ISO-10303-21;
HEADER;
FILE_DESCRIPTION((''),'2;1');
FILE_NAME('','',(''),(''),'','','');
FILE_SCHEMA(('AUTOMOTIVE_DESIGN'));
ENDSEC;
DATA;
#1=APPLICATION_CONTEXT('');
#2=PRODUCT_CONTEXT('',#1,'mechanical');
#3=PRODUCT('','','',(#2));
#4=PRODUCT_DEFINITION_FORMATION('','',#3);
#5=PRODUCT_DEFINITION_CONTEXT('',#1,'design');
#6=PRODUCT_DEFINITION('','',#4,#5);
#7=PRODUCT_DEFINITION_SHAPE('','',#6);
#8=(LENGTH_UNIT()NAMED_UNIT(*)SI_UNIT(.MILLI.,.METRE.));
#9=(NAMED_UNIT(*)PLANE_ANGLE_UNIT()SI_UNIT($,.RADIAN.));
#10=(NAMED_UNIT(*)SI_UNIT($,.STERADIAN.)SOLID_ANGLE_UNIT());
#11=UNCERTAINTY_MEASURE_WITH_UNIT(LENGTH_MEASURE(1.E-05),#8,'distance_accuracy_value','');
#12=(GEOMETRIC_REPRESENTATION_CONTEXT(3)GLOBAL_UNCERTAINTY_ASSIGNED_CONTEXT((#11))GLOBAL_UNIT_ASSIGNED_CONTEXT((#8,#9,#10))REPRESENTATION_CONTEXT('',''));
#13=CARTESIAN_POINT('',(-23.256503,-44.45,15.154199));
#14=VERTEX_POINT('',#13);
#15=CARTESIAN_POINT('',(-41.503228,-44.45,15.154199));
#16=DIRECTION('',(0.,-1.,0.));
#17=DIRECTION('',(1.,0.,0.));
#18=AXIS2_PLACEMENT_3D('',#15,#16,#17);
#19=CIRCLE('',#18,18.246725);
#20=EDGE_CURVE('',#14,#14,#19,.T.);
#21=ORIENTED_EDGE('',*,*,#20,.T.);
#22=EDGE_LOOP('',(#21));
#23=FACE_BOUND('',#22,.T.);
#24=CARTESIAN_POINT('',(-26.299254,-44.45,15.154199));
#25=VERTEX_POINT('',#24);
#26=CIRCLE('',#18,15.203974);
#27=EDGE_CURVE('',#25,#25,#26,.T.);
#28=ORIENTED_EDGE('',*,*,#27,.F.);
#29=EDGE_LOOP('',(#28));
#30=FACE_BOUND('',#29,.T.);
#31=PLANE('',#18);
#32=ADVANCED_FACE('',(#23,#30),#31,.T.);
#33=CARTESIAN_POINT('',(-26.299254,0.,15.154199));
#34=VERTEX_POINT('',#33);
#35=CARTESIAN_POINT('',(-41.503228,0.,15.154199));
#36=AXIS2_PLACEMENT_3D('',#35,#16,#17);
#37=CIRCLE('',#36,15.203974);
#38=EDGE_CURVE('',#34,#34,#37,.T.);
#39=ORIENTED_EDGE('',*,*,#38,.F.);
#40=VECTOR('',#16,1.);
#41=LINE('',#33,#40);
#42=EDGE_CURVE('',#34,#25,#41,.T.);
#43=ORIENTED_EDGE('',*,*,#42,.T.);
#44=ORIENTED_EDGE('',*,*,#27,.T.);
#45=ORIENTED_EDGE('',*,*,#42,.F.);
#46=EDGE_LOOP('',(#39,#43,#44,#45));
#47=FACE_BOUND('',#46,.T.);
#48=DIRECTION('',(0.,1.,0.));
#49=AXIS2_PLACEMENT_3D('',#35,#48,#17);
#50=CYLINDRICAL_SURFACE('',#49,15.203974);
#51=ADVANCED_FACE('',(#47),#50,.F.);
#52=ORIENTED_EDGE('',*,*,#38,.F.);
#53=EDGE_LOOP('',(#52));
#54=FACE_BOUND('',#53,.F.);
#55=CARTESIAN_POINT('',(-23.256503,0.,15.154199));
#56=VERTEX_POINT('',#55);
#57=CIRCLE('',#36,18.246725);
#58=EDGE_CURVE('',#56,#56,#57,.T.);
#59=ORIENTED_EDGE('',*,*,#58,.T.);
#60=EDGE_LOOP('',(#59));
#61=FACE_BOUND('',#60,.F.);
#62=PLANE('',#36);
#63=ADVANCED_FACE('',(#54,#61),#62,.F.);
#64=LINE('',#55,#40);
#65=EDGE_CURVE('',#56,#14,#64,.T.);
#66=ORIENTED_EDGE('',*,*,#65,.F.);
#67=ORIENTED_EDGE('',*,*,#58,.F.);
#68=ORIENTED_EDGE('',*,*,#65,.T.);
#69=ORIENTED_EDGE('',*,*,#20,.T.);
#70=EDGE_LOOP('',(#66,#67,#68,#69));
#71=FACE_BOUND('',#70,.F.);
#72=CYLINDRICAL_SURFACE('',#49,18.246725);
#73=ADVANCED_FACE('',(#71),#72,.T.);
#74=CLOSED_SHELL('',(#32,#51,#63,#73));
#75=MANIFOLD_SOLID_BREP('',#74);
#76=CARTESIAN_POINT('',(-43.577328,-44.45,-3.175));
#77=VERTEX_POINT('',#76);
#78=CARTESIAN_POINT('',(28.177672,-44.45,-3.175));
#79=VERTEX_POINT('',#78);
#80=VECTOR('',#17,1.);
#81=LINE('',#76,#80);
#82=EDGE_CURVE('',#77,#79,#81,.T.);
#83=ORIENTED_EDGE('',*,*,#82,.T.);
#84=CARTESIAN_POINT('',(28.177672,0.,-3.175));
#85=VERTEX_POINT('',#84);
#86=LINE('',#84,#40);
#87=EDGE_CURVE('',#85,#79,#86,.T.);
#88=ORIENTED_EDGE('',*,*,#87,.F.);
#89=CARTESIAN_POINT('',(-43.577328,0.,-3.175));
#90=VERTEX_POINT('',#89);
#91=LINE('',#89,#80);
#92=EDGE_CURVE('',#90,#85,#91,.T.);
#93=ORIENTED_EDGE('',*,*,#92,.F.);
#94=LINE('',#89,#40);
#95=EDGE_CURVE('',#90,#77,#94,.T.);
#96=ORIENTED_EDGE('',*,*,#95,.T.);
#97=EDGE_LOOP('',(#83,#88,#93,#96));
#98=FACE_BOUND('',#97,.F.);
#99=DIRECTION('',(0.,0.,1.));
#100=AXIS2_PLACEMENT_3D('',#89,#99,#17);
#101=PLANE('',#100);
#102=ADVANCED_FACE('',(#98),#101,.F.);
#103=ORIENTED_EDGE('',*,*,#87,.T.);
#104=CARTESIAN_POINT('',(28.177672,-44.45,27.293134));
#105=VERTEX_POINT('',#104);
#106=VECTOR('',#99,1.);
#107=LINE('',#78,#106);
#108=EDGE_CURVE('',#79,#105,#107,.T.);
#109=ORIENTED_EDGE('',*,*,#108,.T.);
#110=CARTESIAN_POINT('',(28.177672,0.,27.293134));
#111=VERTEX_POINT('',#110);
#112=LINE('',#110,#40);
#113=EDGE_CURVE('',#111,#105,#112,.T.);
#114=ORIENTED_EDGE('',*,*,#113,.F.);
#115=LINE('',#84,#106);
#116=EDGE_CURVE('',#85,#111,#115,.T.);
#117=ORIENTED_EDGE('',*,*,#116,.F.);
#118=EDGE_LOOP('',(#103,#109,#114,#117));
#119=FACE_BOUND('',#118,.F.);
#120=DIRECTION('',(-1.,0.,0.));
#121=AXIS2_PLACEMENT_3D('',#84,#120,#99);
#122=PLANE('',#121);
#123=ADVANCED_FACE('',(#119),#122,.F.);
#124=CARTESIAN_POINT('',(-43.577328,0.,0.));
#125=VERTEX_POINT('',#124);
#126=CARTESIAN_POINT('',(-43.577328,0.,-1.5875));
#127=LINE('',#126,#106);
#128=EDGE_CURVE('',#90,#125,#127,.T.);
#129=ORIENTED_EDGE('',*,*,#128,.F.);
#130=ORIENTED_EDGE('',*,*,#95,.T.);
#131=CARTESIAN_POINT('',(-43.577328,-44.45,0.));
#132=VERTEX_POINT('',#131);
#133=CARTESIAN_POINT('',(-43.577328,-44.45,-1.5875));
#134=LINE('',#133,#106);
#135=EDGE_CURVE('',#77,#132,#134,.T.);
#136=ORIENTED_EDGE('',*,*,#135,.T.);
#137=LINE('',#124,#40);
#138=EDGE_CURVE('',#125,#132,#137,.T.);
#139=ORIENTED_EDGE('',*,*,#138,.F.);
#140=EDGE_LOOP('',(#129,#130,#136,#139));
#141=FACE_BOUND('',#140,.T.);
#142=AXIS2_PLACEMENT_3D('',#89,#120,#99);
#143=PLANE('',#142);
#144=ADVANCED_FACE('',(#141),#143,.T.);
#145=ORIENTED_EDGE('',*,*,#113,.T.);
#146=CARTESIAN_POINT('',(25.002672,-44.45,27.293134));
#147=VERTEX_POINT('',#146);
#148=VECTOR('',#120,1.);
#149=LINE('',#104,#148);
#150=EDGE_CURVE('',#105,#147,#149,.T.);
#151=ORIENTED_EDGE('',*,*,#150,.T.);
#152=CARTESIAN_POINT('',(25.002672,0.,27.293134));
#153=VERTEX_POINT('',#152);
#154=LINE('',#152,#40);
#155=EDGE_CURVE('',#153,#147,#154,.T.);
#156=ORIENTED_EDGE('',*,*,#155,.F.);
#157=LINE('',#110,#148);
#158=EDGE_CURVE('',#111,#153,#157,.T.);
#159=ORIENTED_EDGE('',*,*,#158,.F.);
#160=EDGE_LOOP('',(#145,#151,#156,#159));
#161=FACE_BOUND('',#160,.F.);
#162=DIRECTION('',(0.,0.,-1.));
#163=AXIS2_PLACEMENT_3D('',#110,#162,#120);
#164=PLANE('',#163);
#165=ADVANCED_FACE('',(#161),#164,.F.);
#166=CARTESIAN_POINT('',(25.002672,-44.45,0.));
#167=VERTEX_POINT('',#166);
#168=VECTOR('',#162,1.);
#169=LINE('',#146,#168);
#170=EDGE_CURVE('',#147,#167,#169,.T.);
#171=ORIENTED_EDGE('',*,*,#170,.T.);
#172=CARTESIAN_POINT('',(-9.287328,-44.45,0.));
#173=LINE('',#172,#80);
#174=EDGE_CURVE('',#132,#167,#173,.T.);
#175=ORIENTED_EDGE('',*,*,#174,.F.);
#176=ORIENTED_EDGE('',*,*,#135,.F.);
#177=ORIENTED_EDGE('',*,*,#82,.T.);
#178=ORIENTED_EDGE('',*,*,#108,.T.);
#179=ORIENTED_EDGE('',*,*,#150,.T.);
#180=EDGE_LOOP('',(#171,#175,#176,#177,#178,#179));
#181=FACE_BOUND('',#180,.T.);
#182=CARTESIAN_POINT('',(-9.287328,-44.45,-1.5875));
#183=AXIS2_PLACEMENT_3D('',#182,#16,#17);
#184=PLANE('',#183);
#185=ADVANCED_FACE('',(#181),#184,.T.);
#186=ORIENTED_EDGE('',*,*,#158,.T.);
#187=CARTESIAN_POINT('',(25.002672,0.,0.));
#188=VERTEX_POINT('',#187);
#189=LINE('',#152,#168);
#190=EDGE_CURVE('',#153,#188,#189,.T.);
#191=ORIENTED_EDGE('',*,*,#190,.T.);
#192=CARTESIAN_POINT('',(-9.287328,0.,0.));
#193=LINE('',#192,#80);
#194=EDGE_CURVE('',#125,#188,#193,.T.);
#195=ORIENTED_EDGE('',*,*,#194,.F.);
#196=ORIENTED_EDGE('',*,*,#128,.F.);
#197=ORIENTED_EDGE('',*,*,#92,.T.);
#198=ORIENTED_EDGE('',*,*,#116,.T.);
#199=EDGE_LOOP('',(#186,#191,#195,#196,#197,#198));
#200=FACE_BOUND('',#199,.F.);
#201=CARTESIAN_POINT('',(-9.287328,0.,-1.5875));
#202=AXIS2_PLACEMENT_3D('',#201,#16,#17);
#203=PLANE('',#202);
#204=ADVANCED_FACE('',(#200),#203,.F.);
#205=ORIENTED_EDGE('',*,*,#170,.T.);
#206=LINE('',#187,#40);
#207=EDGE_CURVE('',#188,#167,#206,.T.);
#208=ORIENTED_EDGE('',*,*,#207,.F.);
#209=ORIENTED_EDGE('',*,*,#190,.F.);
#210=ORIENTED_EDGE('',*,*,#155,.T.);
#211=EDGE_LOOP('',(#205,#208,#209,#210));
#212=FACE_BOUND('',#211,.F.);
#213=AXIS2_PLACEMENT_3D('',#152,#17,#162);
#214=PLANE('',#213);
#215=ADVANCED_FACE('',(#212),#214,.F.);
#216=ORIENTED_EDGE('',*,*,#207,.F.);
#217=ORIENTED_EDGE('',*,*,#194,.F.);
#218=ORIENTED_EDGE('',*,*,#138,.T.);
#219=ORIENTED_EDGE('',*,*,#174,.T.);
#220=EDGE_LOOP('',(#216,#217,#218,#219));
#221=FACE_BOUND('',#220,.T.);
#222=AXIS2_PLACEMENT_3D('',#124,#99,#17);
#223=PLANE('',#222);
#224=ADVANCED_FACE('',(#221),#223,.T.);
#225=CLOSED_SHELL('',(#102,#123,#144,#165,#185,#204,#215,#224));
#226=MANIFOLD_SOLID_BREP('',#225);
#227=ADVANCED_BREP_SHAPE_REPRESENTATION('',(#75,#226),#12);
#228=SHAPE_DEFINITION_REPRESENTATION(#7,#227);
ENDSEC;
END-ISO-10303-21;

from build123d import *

# Parameters (mm, degrees)
F1_R     = 18.2467251248
F1_R_2   = 15.2039742304
F2_DEPTH = 44.45
F0_W     = 68.58
F0_H     = 3.175


with BuildPart() as f2:
    # F1 (on Front) → F2 (new body)
    with BuildSketch(Plane.XZ):
        with Locations((-41.5032282472, 15.1541987434)):
            Circle(F1_R)
        with Locations((-41.5032282472, 15.1541987434)):
            Circle(F1_R_2, mode=Mode.SUBTRACT)
    extrude(amount=F2_DEPTH)


with BuildPart() as f2b:
    # F0 (on Front) → F2, piece 2 (new body)
    with BuildSketch(Plane.XZ):
        with Locations((-9.2873283243, -1.5875)):
            Rectangle(F0_W, F0_H)
        Polygon((25.0026716757, 27.2931344807), (25.0026716757, 0), (25.0026716757, -3.175), (28.1776716757, -3.175), (28.1776716757, 27.2931344807), align=None)
    extrude(amount=F2_DEPTH)


solid = Compound([f2.part, f2b.part])
